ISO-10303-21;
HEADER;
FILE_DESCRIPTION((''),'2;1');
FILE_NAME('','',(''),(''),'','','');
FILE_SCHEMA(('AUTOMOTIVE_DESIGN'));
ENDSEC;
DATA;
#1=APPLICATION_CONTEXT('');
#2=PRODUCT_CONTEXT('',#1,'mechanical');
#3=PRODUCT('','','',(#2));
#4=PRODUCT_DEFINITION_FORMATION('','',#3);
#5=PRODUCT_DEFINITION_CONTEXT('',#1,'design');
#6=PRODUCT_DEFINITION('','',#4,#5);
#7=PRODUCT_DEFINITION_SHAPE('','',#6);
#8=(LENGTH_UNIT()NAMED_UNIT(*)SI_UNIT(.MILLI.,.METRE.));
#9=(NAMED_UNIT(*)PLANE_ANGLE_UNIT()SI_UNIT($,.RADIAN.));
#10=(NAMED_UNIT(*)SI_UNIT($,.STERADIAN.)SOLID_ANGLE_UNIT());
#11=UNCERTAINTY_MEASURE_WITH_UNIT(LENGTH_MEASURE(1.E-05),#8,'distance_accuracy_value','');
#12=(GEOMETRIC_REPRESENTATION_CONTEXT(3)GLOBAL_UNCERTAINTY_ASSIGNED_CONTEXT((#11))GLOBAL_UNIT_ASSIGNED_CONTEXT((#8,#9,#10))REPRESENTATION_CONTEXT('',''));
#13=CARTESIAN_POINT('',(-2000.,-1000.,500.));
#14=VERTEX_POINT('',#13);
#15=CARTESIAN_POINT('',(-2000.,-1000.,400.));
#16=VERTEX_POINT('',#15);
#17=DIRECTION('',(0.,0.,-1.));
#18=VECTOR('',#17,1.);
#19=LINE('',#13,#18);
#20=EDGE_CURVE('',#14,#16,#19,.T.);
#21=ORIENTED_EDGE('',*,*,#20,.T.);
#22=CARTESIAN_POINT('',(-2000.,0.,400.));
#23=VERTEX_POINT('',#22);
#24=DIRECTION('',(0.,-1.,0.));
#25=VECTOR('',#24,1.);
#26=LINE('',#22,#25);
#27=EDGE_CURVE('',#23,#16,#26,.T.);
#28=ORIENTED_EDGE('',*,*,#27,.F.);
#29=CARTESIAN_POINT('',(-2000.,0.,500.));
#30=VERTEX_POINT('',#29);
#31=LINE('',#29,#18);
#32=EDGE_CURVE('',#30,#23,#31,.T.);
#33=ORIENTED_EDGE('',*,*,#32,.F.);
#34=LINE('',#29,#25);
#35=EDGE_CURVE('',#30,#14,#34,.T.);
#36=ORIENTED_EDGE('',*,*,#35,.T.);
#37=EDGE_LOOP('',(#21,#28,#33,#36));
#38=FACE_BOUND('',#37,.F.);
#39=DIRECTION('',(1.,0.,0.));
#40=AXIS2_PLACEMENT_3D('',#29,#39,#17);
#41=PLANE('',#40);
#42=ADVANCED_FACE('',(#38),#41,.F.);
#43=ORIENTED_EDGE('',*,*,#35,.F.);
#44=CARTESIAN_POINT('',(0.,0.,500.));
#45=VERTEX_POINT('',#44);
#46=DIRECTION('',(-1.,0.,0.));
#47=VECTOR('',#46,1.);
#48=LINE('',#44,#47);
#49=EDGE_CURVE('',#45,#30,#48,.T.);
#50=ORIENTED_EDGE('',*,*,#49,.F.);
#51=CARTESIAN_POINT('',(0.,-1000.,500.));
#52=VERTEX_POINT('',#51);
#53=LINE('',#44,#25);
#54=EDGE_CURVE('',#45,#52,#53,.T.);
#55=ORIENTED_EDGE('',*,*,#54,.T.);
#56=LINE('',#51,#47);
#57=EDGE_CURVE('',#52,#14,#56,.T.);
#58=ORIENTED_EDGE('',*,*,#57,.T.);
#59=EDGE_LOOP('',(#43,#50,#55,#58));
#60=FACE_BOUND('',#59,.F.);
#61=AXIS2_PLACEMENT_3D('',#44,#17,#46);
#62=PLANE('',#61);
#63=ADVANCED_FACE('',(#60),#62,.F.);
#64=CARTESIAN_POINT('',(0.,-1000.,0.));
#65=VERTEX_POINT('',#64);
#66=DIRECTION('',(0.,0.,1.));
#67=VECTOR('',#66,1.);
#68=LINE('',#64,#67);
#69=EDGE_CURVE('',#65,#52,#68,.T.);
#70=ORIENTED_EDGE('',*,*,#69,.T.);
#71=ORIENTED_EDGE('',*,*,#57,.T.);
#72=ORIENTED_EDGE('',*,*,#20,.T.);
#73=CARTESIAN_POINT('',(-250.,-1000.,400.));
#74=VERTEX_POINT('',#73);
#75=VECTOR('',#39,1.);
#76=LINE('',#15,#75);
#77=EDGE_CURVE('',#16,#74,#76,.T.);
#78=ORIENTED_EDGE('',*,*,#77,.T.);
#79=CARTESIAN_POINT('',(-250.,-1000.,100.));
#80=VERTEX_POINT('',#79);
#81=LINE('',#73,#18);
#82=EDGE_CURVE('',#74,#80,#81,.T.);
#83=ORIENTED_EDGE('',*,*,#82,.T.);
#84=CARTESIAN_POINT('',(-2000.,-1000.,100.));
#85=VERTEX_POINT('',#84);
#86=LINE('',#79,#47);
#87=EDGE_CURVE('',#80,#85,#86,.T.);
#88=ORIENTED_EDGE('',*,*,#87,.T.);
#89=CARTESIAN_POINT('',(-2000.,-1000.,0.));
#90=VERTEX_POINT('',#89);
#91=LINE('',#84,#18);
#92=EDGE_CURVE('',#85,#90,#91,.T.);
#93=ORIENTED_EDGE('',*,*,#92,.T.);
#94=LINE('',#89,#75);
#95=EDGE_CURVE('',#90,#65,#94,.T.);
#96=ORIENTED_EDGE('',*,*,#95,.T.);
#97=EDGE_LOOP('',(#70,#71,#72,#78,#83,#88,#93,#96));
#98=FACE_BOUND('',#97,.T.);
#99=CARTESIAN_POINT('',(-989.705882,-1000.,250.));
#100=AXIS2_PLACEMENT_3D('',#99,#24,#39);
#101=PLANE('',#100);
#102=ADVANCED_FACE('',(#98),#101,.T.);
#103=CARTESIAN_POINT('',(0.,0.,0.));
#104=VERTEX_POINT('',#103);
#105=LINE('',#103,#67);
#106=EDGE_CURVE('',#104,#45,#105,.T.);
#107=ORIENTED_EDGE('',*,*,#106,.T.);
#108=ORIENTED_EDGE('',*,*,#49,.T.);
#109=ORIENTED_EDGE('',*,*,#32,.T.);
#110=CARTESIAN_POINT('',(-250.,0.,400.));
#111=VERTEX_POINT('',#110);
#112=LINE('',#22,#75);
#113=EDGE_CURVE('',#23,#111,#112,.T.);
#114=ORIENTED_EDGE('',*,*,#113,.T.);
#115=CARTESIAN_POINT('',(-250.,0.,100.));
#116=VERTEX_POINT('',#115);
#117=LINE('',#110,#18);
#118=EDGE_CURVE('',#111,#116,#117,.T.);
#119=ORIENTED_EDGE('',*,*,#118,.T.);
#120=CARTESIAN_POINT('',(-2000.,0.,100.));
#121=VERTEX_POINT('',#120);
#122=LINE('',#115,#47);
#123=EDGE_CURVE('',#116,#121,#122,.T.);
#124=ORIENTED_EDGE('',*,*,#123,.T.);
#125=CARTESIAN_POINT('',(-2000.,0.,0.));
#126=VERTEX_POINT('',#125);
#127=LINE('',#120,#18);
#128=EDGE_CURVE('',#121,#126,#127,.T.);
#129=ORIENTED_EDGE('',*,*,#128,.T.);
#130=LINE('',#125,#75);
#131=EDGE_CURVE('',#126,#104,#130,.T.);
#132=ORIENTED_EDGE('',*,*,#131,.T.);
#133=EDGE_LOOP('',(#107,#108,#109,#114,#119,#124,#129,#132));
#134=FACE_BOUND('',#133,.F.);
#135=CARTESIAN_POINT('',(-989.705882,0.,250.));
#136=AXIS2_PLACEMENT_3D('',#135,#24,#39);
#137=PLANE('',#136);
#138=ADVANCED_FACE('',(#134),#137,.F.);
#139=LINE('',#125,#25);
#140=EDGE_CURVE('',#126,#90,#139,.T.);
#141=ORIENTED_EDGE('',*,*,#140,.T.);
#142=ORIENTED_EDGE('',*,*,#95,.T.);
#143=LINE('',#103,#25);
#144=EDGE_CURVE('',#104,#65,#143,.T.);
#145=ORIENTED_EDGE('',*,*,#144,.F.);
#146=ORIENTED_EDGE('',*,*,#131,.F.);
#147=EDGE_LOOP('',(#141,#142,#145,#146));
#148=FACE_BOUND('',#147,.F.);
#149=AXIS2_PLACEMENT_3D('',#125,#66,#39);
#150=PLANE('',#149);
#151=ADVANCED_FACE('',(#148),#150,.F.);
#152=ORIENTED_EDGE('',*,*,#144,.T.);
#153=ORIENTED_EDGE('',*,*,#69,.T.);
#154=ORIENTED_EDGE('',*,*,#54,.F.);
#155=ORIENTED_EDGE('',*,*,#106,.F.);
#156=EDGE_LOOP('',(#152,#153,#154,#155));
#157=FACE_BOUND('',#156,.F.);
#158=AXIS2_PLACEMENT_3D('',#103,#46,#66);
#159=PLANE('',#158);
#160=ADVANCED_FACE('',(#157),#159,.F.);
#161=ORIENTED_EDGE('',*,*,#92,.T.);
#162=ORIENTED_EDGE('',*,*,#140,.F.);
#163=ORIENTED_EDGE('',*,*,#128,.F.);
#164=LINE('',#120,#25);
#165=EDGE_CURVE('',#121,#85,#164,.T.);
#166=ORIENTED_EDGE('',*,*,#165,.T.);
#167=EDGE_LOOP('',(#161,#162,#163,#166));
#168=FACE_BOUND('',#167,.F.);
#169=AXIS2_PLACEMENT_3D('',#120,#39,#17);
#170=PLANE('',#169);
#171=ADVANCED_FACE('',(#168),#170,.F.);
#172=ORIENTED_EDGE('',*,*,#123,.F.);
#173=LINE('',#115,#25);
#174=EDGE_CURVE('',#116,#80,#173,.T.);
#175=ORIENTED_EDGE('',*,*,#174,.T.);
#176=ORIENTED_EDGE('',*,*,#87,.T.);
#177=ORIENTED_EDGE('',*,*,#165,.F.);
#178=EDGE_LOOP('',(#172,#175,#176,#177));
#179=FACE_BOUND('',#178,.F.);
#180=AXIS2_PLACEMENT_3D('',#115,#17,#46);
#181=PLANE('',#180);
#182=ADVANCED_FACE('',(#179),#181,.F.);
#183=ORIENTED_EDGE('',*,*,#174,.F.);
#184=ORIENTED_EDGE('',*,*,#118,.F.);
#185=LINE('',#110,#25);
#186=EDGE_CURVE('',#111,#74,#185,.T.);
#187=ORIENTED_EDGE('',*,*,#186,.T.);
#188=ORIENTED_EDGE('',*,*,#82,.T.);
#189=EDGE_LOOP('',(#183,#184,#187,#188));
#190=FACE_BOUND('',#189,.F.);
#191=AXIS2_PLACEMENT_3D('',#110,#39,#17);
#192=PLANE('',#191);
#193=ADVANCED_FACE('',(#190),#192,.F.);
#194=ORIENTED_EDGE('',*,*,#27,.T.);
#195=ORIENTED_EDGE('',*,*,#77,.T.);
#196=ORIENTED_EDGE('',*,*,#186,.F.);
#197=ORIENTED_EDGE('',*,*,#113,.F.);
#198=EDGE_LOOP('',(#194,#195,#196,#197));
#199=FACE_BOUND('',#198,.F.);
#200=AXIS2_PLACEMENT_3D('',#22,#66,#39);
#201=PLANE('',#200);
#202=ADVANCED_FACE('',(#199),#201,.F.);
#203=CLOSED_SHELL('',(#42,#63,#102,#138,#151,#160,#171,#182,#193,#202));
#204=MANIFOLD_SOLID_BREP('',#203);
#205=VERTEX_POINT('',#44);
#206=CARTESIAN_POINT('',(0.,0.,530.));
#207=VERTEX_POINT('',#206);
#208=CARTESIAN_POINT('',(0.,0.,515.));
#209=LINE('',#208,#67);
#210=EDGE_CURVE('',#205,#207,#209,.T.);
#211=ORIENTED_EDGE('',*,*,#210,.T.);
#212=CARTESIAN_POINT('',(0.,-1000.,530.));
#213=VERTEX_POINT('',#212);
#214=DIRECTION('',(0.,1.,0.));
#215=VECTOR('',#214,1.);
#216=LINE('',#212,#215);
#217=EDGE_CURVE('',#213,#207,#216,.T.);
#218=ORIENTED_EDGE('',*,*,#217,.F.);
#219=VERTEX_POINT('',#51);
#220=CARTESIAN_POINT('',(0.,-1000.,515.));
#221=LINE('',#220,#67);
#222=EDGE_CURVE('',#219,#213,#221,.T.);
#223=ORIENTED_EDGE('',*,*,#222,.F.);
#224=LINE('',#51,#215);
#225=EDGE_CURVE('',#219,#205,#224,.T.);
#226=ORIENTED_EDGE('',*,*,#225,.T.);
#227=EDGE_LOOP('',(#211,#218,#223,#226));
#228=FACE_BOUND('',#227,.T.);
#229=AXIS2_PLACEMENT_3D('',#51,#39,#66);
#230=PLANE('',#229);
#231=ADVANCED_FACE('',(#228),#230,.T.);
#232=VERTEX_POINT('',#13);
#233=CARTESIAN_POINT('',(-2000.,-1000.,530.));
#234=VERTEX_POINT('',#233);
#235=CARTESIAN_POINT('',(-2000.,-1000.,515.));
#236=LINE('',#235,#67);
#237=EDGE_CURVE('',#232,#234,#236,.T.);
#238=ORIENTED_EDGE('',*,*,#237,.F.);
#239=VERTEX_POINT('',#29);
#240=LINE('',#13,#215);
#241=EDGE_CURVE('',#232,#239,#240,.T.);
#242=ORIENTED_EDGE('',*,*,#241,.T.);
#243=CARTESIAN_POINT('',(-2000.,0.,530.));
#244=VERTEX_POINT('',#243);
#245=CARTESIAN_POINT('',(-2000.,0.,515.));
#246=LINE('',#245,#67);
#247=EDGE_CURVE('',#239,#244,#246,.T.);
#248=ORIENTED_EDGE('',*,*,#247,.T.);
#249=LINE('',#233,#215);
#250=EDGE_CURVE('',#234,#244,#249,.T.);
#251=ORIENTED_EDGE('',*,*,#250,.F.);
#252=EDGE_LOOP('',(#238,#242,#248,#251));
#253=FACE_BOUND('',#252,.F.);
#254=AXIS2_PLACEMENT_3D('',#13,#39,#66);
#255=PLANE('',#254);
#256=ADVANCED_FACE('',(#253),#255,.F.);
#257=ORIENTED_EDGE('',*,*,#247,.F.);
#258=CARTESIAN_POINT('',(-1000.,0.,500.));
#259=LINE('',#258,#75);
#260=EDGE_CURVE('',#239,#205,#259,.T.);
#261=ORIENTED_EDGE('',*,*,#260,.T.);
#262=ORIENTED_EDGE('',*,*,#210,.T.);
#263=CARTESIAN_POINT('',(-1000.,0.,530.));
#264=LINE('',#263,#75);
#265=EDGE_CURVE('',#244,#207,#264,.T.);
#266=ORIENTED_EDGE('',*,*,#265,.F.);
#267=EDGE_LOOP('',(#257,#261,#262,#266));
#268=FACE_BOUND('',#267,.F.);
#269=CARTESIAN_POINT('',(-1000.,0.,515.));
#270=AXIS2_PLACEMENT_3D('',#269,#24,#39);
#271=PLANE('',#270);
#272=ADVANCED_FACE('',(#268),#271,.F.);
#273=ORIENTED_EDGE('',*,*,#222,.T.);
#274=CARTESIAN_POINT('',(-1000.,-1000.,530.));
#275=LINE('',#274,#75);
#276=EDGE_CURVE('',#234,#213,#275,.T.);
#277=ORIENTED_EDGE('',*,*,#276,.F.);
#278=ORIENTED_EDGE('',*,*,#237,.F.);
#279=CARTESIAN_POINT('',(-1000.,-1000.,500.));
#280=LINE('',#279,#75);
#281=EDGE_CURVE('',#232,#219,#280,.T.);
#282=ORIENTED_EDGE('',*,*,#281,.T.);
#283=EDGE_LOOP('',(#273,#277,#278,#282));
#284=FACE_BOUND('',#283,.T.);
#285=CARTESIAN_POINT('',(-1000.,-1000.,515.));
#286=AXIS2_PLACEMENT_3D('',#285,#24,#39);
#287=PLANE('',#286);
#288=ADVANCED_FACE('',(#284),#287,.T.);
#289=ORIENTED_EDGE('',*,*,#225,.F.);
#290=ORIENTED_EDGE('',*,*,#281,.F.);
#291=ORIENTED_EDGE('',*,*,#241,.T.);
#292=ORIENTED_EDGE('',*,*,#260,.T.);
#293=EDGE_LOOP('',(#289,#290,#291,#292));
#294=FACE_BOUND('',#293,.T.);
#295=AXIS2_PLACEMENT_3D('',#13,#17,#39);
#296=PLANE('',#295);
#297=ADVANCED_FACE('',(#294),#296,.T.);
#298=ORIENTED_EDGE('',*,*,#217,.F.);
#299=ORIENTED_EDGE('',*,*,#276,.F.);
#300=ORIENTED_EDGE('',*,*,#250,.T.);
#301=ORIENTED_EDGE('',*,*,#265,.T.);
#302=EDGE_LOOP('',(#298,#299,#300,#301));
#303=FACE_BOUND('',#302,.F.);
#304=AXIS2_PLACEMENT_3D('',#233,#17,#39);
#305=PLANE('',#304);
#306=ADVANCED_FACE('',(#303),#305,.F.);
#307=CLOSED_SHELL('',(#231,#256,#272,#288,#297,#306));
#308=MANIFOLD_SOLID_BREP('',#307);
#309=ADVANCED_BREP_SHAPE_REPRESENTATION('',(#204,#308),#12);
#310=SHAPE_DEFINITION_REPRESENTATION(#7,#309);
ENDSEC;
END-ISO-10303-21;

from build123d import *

# Parameters (mm, degrees)
F1_DEPTH = 1000
F3_W     = 2000
F3_H     = 30
F4_DEPTH = 1000


# Not quite as in the source:
# - a feature names something its author has since deleted; it is built from what else it names


with BuildPart() as f1:
    # F0 (on Front) → F1 (new body)
    with BuildSketch(Plane.XZ):
        Polygon((-2000, 0), (0, 0), (0, 500), (-2000, 500), (-2000, 400), (-250, 400), (-250, 100), (-2000, 100), align=None)
    extrude(amount=F1_DEPTH)


with BuildPart() as f4:
    # F3 (on face) → F4 (new body)
    with BuildSketch(Plane.XZ.offset(1000)):
        with Locations((-1000, 515)):
            Rectangle(F3_W, F3_H)
    extrude(amount=-F4_DEPTH)


solid = Compound([f1.part, f4.part])
